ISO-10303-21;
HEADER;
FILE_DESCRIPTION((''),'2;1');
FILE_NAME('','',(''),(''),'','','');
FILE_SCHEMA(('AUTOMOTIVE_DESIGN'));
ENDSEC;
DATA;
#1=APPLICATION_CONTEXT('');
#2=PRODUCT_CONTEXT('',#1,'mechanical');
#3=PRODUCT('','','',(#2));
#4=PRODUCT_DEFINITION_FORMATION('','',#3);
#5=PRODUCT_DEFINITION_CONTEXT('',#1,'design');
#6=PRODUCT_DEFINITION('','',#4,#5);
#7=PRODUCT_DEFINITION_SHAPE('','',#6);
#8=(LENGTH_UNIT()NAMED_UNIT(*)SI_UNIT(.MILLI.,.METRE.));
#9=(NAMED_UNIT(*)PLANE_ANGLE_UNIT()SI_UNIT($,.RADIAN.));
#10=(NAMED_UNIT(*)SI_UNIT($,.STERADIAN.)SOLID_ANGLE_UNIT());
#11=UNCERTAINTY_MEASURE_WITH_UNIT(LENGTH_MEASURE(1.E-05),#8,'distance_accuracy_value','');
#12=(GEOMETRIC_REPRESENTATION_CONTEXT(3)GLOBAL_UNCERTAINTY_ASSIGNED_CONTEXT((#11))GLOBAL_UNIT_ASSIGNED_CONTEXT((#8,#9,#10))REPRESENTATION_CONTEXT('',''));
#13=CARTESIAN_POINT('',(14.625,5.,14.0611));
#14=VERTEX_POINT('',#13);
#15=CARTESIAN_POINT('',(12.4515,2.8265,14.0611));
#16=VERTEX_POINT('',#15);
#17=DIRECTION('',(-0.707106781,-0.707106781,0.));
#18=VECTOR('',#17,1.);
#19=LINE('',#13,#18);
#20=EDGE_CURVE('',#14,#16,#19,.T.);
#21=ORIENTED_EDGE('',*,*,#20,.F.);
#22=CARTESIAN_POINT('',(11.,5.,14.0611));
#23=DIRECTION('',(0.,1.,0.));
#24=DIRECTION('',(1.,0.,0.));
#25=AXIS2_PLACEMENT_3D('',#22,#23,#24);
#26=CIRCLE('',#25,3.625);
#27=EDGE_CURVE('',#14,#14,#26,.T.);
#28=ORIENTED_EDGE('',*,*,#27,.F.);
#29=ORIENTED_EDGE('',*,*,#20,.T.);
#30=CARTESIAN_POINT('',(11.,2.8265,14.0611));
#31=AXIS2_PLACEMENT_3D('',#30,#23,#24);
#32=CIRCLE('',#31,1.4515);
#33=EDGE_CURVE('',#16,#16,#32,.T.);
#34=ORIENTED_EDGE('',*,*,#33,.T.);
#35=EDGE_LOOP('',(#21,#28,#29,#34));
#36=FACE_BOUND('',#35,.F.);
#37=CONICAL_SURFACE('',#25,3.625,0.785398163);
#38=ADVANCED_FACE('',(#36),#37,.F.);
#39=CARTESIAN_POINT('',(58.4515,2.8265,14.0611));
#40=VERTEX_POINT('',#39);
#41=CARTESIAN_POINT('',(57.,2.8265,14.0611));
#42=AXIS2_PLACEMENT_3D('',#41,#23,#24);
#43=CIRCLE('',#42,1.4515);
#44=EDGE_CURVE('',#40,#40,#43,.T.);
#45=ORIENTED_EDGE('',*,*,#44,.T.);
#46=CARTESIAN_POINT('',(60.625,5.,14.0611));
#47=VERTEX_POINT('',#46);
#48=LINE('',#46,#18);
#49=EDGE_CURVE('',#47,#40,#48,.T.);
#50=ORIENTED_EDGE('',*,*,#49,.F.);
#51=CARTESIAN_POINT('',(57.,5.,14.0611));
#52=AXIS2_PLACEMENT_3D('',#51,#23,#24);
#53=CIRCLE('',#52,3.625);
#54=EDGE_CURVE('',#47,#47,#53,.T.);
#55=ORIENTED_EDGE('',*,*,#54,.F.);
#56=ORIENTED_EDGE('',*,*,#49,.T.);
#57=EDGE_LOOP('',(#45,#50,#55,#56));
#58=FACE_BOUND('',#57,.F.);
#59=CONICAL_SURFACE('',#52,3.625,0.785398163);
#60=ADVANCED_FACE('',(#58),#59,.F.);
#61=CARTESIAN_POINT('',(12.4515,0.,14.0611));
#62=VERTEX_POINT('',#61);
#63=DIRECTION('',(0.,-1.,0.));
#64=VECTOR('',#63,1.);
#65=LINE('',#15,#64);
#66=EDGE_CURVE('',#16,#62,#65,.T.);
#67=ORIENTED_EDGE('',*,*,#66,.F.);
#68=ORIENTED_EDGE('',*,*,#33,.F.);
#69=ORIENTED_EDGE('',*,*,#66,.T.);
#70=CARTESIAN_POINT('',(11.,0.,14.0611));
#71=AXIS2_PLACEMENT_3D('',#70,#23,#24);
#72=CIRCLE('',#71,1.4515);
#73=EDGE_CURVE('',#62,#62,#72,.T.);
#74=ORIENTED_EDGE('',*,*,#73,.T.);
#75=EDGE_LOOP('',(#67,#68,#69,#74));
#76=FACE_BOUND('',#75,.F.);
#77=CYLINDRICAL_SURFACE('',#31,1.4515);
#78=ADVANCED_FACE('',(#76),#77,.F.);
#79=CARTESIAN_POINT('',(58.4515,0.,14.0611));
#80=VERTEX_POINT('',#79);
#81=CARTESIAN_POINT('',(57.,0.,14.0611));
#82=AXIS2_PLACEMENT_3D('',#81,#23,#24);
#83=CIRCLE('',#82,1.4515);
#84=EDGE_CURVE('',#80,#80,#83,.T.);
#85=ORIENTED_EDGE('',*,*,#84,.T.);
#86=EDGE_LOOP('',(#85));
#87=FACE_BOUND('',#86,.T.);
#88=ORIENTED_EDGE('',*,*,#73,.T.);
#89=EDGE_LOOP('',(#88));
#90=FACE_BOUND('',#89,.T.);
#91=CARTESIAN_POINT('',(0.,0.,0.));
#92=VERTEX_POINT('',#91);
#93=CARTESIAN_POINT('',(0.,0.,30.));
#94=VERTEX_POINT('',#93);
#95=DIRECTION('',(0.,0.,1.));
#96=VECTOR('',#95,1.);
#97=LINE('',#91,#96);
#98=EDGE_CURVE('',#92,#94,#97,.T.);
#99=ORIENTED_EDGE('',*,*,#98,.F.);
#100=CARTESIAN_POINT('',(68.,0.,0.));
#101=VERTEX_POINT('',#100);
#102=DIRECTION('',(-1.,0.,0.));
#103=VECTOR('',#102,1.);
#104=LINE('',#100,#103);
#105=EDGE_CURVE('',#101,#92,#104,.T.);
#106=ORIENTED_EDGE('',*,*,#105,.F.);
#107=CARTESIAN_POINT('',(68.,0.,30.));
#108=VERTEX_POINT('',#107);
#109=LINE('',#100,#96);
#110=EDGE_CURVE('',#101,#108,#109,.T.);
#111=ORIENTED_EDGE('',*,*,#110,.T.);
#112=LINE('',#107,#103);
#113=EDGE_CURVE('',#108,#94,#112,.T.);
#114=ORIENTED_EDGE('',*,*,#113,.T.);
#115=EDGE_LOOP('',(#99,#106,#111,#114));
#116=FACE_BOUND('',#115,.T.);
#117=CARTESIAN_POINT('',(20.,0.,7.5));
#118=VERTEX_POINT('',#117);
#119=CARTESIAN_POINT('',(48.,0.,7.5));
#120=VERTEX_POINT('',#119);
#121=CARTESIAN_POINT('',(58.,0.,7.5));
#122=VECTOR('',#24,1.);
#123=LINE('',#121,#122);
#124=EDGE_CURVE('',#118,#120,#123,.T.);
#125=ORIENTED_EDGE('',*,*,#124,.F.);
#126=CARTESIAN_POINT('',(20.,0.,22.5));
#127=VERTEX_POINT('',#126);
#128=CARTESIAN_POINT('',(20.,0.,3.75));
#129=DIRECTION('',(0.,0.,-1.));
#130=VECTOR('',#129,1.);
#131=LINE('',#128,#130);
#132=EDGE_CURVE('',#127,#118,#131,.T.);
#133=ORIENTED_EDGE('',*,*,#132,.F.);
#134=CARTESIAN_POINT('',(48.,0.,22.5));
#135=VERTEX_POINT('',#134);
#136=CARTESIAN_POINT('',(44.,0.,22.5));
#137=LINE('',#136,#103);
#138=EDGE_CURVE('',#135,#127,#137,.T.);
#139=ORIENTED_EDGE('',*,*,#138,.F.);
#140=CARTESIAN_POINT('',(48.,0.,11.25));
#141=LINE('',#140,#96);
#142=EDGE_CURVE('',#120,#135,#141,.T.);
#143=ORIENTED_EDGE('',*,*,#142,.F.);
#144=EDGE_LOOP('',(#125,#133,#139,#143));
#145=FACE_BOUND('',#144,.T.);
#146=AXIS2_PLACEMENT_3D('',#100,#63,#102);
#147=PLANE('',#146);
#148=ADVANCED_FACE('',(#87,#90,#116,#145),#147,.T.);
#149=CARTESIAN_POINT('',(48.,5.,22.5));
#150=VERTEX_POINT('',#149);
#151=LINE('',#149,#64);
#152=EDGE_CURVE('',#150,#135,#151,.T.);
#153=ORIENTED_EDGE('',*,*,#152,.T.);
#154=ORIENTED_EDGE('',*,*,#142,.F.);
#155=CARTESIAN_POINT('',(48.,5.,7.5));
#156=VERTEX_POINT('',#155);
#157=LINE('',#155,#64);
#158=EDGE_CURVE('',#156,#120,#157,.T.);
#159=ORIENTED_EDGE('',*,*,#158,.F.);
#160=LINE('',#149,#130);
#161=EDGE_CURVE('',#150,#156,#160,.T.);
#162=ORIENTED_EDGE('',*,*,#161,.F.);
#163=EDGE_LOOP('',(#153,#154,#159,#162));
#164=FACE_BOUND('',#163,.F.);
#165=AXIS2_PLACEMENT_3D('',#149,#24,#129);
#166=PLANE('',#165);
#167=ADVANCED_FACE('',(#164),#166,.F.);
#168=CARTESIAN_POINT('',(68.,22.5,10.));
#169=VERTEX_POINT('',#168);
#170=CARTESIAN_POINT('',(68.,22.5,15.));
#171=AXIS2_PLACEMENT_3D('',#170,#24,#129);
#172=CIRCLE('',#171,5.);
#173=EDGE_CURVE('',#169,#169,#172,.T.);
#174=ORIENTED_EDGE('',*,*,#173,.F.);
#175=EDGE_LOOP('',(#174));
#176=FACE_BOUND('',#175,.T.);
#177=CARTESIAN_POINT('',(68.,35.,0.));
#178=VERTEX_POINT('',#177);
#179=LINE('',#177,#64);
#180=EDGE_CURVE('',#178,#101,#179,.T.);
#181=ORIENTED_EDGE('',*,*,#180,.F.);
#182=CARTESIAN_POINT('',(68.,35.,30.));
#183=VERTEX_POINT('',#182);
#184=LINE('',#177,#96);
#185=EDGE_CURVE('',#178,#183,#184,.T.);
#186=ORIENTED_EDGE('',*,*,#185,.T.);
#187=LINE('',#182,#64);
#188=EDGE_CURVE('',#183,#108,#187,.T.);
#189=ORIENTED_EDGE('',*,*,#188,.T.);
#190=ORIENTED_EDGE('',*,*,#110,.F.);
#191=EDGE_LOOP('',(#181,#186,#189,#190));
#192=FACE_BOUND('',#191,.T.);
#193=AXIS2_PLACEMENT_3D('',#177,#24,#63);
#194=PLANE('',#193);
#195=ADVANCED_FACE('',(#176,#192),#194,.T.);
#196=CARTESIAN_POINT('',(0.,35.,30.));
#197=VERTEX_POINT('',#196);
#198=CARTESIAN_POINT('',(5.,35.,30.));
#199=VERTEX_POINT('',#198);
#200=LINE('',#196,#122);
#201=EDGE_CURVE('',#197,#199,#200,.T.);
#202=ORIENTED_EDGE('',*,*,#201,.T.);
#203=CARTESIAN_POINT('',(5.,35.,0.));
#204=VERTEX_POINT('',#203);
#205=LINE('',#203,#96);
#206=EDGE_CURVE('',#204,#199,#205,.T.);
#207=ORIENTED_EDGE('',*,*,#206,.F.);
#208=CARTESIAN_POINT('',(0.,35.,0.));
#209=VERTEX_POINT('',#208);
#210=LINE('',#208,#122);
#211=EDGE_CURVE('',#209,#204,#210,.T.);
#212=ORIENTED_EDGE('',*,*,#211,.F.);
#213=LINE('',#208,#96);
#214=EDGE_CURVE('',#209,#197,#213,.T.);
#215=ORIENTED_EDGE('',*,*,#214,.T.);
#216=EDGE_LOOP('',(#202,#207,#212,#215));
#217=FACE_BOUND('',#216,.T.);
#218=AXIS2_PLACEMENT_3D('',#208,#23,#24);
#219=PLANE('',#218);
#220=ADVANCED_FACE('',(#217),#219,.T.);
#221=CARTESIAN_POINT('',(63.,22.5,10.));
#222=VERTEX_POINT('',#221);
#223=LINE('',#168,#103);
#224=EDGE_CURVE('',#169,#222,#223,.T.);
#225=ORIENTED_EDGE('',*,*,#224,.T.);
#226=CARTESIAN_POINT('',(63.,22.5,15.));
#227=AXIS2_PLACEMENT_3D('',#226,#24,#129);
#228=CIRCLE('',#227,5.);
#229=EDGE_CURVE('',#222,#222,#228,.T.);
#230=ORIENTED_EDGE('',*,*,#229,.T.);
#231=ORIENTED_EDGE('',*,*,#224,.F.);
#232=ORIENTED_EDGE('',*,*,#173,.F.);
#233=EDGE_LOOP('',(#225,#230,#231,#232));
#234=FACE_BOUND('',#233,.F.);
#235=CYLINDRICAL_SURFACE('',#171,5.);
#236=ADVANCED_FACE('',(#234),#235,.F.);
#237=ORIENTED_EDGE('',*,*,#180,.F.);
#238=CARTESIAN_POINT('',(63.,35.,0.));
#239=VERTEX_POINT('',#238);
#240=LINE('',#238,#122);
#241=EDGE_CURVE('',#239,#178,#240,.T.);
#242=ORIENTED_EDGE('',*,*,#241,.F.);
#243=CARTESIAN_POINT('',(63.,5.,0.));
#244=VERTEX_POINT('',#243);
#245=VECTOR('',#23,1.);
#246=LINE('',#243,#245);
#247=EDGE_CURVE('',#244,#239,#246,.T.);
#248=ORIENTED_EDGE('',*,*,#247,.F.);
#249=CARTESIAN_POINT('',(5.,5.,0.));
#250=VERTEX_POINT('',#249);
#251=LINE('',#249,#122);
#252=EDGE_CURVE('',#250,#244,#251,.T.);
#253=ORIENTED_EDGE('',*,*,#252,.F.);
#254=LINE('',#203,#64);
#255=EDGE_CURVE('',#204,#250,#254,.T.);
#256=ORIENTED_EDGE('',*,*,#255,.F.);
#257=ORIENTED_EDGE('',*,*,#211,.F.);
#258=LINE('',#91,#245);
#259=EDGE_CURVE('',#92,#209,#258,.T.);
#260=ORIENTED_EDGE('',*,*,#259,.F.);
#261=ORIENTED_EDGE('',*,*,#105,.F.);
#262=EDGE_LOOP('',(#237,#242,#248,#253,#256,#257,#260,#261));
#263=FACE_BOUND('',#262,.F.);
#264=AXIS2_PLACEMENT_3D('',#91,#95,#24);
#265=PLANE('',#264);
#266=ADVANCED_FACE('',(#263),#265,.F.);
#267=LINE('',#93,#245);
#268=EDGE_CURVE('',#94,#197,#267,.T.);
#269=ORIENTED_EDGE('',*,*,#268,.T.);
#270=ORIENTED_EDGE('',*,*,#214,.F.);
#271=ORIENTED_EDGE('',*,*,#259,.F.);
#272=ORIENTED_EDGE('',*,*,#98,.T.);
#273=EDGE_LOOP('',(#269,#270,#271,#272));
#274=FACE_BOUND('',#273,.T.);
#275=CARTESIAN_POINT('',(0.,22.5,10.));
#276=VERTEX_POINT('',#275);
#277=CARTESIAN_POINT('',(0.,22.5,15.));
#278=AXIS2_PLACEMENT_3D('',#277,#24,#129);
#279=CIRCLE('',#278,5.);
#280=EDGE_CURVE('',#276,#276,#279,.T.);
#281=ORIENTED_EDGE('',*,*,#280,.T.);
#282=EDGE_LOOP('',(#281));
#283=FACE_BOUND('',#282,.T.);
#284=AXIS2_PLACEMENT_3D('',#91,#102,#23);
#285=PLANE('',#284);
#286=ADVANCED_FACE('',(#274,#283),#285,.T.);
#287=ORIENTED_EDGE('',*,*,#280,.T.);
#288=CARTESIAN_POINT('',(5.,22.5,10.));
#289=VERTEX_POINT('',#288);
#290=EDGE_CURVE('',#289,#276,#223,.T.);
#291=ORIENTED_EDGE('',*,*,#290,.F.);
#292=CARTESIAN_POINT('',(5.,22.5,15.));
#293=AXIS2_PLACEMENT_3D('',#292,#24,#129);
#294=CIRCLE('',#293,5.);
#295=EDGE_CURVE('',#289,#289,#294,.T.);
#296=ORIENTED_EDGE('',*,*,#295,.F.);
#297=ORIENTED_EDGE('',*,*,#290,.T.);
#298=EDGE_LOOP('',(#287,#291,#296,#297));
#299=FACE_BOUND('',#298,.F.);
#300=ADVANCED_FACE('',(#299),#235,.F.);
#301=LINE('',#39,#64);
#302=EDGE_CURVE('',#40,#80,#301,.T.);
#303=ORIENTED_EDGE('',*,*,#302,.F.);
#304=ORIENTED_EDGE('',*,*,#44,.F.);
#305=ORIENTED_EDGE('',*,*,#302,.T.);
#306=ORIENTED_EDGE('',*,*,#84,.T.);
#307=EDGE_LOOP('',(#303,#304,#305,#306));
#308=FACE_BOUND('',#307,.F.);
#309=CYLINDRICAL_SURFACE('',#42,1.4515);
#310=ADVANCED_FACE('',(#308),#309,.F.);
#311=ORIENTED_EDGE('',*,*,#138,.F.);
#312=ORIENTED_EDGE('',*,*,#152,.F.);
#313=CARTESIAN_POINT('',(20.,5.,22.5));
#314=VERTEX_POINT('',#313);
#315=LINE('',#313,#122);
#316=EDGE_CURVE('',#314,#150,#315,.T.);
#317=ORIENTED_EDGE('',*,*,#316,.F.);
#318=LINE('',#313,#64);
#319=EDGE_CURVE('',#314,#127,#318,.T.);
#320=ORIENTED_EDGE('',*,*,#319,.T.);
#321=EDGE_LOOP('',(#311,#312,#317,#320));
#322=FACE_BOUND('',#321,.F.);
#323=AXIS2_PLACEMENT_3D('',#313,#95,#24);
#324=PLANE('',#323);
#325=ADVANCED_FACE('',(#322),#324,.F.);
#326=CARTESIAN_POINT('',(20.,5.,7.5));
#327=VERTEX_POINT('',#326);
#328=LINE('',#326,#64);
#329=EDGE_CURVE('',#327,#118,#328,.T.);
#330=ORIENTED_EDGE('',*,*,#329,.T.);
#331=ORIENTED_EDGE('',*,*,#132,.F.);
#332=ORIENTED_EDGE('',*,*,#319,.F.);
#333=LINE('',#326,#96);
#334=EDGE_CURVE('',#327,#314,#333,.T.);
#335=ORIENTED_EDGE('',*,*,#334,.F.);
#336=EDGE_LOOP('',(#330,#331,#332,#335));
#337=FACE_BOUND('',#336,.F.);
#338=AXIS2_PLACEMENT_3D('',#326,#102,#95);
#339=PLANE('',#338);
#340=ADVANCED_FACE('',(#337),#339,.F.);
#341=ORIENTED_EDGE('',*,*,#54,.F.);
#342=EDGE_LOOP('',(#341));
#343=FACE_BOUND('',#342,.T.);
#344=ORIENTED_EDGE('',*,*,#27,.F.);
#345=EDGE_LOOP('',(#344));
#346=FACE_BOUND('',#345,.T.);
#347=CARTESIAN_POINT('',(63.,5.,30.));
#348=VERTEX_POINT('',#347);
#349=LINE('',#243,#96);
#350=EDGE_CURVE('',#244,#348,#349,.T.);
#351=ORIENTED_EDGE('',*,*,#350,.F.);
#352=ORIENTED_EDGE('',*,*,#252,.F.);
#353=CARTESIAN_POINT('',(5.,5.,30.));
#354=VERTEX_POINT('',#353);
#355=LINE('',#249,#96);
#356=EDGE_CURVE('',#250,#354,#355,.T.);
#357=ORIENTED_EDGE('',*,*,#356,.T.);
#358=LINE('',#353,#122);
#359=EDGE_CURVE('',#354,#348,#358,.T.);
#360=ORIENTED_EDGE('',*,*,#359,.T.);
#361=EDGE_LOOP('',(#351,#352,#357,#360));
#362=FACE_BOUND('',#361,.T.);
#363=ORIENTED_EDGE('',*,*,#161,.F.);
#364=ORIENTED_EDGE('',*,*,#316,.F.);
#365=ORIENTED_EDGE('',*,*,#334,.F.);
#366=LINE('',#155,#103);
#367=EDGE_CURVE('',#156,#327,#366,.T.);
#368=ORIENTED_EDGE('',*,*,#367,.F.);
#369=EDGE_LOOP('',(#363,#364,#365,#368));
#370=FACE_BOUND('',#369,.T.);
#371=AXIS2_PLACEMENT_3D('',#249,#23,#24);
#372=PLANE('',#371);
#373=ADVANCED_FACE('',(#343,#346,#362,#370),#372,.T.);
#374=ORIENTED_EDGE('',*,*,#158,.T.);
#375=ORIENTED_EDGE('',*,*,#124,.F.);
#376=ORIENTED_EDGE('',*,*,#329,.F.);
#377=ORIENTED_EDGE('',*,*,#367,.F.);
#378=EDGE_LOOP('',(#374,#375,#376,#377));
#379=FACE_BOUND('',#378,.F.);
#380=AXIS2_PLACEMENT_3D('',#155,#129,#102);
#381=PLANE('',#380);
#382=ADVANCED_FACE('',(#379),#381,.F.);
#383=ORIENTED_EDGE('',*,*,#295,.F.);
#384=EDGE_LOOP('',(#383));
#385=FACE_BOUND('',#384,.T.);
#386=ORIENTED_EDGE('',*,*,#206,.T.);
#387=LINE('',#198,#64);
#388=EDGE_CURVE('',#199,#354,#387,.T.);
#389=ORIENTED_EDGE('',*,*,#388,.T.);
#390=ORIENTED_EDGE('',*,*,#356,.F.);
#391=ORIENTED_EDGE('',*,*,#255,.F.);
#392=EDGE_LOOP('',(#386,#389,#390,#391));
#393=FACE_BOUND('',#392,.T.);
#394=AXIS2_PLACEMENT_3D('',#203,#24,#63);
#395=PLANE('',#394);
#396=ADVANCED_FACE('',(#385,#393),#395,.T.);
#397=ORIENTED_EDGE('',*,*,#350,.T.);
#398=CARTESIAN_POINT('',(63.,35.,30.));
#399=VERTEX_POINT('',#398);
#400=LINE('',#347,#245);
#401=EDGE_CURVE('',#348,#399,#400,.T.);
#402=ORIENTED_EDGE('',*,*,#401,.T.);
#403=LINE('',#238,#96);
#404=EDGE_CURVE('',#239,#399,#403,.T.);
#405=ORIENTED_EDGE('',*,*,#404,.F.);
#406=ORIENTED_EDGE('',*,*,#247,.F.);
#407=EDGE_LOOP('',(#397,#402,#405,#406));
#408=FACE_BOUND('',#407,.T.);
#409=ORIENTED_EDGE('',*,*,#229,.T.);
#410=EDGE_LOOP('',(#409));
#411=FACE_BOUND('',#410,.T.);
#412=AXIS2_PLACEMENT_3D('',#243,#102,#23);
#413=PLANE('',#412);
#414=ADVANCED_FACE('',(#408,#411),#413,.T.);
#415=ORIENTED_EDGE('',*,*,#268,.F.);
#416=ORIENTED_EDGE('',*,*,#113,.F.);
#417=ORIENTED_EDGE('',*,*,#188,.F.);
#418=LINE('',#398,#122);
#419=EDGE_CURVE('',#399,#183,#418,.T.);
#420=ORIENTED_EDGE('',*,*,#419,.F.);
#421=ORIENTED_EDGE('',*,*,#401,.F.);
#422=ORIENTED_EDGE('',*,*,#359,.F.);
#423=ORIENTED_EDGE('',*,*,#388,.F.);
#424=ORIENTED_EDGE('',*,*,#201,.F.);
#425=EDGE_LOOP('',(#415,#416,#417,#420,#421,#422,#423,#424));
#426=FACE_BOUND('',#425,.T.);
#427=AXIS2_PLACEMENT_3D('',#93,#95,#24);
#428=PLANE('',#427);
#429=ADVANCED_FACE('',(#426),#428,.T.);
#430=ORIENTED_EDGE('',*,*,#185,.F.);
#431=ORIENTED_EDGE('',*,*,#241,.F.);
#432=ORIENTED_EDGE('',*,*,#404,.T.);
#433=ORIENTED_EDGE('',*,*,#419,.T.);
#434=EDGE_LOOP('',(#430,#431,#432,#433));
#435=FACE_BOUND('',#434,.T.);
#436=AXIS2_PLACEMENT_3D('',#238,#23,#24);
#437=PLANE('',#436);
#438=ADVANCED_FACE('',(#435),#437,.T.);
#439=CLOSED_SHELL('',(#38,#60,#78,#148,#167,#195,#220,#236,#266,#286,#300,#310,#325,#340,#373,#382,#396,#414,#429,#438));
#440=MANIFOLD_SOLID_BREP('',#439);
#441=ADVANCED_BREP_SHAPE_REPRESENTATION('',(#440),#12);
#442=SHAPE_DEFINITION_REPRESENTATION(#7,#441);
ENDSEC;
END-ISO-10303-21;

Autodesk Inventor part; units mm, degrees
ref_plane "YZ Plane" through (0, 0, 0) normal (1, 0, 0) x (0, 1, 0)
ref_plane "XZ Plane" through (0, 0, 0) normal (0, 1, 0) x (-1, 0, 0)
ref_plane "XY Plane" through (0, 0, 0) normal (0, 0, 1) x (1, 0, 0)
sketch "Sketch1" plane through (0, 0, 0) normal (0, 0, 1) x (1, 0, 0)
  line L0 (0, 0) -> (0, 35)
  line L1 (0, 35) -> (5, 35)
  line L2 (5, 35) -> (5, 5)
  line L3 (5, 5) -> (63, 5)
  line L4 (63, 5) -> (63, 35)
  line L5 (63, 35) -> (68, 35)
  line L6 (68, 35) -> (68, 0)
  line L7 (68, 0) -> (0, 0)
  dimension "d0" = 35
  dimension "d1" = 5
  dimension "d2" = 30
  dimension "d3" = 58
  dimension "d4" = 30
  dimension "d5" = 5
extrude "Extrusion1" add sketch "Sketch1" along normal blind 30
sketch "Sketch2" plane through (68, 0, 0) normal (1, 0, 0) x (0, 0, -1)
  circle A0 centre (-15, 22.5) radius 5
  line L0 (0, 35) -> (-30, 35) projected
  line L1 (0, 0) -> (0, 35) projected
  dimension "d8" = 10
  dimension "d9" = 12.5
  dimension "d10" = 15
extrude "Extrusion2" cut sketch "Sketch2" against normal through all
sketch "Sketch3" plane through (5, 5, 0) normal (0, 1, 0) x (1, 0, 0)
  line L0 (15, -22.5) -> (43, -22.5)
  line L1 (43, -22.5) -> (43, -7.5)
  line L2 (43, -7.5) -> (15, -7.5)
  line L3 (15, -7.5) -> (15, -22.5)
  line L4 (15, -22.5) -> (43, -7.5) construction
  line L5 (43, -22.5) -> (15, -7.5) construction
  line L6 (58, 0) -> (0, 0) projected
  line L7 (0, 0) -> (0, -30) projected
  point P0 (-5, 0)
  point P1 (29, -15)
  dimension "d13" = 28
  dimension "d14" = 15
  dimension "d15" = 15
  dimension "d16" = 29
extrude "Extrusion3" cut sketch "Sketch3" against normal through all
sketch "Sketch4" plane through (5, 5, 0) normal (0, 1, 0) x (1, 0, 0)
  circle A0 centre (6, -14.0611) radius 3.625
  line L0 (0, -10) -> (0, -20) projected
  circle A1 centre (52, -14.0611) radius 3.625
  line L1 (43, -7.5) -> (43, -22.5) projected
  point P0 (-5, 0)
  dimension "d19" = 7.25
  dimension "d20" = 6
  dimension "d21" = 7.25
  dimension "d22" = 9
extrude "Extrusion4" cut sketch "Sketch4" against normal blind 2.1735 draft -45
sketch "Sketch5" plane through (11, 2.8265, 14.0611) normal (0, 1, 0) x (1, 0, 0)
  circle A0 centre (0, 0) radius 1.4515
  circle A1 centre (46, 0) radius 1.4515 projected
  circle A2 centre (46, 0) radius 1.4515
  point P0 (-11, 14.0611)
extrude "Extrusion5" cut sketch "Sketch5" against normal through all
sketch "Sketch6" plane through (5, 5, 0) normal (0, 1, 0) x (1, 0, 0)
  point P0 (-5, 0)
properties part number "1st arm to 2nd linking clamp"
